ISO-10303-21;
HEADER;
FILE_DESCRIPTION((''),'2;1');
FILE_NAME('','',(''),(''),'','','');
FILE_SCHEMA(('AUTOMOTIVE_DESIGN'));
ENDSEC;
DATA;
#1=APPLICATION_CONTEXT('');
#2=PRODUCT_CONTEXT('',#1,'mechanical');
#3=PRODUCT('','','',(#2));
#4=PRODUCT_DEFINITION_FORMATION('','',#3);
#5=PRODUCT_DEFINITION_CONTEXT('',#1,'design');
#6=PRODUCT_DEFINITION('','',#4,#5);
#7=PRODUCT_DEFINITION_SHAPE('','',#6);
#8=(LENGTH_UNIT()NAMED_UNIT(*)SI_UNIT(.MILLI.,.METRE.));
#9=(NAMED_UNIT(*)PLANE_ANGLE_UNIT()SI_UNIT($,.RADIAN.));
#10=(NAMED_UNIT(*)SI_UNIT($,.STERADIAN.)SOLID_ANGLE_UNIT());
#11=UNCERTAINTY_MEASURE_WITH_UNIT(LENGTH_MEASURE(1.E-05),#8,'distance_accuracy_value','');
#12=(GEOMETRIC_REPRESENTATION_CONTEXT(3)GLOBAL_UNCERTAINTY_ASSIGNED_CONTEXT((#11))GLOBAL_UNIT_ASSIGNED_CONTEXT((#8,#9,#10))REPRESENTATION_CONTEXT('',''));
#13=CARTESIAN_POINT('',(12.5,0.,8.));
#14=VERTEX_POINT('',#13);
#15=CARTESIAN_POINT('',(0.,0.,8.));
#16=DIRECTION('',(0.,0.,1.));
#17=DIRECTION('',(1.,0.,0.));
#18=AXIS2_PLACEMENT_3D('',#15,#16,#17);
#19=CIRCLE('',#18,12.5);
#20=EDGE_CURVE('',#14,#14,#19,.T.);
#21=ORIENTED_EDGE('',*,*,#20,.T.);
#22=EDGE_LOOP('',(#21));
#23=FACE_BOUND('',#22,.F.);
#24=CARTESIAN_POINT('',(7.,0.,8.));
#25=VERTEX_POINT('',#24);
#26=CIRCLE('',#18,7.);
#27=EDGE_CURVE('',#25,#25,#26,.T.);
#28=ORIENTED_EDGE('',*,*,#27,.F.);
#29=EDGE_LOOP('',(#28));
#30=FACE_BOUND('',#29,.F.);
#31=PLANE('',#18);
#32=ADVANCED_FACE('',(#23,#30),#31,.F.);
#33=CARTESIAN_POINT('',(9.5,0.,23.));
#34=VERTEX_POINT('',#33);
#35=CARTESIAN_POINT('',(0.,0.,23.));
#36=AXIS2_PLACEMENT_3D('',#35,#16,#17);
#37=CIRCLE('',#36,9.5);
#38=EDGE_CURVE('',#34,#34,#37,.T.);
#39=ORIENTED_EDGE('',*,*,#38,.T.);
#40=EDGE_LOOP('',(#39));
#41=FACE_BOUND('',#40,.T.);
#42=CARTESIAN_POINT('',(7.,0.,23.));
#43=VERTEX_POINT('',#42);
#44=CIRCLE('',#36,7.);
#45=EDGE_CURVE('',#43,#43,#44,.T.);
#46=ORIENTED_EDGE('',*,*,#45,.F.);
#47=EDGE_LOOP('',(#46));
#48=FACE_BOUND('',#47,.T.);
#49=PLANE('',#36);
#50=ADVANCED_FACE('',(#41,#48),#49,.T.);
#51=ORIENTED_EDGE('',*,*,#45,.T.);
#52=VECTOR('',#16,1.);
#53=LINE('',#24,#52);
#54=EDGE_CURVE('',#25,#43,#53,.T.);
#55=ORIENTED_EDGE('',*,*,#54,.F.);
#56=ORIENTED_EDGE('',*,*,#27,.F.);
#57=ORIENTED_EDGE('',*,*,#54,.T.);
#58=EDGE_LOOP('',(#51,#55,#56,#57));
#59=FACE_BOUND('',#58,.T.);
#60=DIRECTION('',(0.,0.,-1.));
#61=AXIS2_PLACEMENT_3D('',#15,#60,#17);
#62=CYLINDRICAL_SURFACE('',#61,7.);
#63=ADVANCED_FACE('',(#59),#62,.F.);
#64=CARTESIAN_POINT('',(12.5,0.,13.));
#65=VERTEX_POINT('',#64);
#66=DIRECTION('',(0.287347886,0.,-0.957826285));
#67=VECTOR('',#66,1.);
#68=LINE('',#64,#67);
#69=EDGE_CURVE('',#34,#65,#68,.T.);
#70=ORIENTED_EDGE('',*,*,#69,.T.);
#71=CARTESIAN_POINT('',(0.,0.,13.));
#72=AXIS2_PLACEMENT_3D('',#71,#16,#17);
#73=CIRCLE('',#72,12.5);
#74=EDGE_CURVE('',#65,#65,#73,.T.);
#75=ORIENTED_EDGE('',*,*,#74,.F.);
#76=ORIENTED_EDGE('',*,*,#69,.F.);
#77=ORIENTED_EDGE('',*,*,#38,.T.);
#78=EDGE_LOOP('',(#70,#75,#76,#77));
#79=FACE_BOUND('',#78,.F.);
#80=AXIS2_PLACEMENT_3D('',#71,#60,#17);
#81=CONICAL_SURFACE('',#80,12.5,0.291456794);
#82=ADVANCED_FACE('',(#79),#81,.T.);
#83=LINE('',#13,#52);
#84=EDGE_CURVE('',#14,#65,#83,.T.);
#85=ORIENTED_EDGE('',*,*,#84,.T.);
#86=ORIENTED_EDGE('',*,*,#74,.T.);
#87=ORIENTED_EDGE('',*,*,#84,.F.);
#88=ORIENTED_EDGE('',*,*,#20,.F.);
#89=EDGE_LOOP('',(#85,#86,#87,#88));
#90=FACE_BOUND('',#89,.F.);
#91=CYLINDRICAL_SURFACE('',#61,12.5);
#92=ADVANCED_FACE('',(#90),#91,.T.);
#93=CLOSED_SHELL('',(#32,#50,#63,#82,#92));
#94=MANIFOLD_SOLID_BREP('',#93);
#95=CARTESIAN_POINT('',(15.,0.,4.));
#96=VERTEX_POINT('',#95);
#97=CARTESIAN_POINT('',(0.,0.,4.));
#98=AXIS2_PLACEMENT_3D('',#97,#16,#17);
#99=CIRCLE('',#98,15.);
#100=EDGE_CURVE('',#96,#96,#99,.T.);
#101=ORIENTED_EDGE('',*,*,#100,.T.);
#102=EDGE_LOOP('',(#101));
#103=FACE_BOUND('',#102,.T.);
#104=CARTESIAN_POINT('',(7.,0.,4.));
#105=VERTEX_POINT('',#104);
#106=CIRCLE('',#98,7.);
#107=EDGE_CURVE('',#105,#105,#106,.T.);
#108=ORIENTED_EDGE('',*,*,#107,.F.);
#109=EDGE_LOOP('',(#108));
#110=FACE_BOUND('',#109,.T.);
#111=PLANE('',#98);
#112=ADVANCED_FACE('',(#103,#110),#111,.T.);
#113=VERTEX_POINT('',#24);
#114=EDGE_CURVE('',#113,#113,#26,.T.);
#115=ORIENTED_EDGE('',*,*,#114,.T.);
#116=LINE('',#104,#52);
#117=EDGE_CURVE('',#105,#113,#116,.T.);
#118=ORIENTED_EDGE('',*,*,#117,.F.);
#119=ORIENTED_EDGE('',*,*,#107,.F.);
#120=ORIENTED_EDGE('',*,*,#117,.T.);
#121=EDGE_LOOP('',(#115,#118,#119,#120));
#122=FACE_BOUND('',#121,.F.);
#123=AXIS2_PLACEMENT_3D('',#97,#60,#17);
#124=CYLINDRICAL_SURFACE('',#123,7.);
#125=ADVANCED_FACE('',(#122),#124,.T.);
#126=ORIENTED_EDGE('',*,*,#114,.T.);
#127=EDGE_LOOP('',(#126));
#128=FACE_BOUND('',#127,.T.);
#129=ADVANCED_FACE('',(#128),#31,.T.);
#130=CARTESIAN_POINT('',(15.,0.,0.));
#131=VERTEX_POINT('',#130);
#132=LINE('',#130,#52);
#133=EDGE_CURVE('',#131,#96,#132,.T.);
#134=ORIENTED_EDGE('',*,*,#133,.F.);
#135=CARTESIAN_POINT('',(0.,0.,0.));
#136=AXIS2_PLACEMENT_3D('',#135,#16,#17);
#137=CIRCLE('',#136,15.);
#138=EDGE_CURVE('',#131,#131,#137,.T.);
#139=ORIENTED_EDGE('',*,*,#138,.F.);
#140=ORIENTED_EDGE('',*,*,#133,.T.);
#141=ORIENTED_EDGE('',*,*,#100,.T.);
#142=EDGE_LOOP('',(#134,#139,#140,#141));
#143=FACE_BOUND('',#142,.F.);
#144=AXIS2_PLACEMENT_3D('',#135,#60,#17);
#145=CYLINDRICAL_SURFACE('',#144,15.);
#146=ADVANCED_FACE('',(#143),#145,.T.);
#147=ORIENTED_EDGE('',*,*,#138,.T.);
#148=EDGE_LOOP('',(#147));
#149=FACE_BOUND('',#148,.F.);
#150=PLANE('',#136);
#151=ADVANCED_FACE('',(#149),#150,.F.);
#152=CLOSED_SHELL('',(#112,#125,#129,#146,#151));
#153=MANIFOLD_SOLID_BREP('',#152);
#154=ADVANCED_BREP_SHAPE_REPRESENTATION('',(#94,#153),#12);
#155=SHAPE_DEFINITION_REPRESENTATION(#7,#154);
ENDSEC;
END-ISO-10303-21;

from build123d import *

# Parameters (mm, degrees)
F0_R     = 15
F1_DEPTH = 4
F2_R     = 7
F3_DEPTH = 4
F4_R     = 12.5
F4_R_2   = 7
F5_DEPTH = 15
F6_SIZE2 = 10
F6_SIZE  = 3


# Not quite as in the source:
# - a feature of the source that left no trace in its solid (it failed there, or was rolled back) is left out


with BuildPart() as f1:
    # F0 (on Top) → F1 (new body)
    with BuildSketch(Plane.XY):
        Circle(F0_R)
    extrude(amount=F1_DEPTH)

    # F2 (on face) → F3 (join)
    with BuildSketch(Plane.XY.offset(4)):
        Circle(F2_R)
    extrude(amount=F3_DEPTH)


with BuildPart() as f5:
    # F4 (on face) → F5 (new body)
    with BuildSketch(Plane.XY.offset(8)):
        Circle(F4_R)
        Circle(F4_R_2, mode=Mode.SUBTRACT)
    extrude(amount=F5_DEPTH)

    # F6
    f6_edges = [f5.edges().sort_by_distance(p)[0] for p in [
        (-12.5, 0, 23),
    ]]
    f6_side = f5.faces().sort_by_distance((-12.146447, 0, 23))[0]
    chamfer(f6_edges, length=F6_SIZE, length2=F6_SIZE2, reference=f6_side)


solid = Compound([f1.part, f5.part])
